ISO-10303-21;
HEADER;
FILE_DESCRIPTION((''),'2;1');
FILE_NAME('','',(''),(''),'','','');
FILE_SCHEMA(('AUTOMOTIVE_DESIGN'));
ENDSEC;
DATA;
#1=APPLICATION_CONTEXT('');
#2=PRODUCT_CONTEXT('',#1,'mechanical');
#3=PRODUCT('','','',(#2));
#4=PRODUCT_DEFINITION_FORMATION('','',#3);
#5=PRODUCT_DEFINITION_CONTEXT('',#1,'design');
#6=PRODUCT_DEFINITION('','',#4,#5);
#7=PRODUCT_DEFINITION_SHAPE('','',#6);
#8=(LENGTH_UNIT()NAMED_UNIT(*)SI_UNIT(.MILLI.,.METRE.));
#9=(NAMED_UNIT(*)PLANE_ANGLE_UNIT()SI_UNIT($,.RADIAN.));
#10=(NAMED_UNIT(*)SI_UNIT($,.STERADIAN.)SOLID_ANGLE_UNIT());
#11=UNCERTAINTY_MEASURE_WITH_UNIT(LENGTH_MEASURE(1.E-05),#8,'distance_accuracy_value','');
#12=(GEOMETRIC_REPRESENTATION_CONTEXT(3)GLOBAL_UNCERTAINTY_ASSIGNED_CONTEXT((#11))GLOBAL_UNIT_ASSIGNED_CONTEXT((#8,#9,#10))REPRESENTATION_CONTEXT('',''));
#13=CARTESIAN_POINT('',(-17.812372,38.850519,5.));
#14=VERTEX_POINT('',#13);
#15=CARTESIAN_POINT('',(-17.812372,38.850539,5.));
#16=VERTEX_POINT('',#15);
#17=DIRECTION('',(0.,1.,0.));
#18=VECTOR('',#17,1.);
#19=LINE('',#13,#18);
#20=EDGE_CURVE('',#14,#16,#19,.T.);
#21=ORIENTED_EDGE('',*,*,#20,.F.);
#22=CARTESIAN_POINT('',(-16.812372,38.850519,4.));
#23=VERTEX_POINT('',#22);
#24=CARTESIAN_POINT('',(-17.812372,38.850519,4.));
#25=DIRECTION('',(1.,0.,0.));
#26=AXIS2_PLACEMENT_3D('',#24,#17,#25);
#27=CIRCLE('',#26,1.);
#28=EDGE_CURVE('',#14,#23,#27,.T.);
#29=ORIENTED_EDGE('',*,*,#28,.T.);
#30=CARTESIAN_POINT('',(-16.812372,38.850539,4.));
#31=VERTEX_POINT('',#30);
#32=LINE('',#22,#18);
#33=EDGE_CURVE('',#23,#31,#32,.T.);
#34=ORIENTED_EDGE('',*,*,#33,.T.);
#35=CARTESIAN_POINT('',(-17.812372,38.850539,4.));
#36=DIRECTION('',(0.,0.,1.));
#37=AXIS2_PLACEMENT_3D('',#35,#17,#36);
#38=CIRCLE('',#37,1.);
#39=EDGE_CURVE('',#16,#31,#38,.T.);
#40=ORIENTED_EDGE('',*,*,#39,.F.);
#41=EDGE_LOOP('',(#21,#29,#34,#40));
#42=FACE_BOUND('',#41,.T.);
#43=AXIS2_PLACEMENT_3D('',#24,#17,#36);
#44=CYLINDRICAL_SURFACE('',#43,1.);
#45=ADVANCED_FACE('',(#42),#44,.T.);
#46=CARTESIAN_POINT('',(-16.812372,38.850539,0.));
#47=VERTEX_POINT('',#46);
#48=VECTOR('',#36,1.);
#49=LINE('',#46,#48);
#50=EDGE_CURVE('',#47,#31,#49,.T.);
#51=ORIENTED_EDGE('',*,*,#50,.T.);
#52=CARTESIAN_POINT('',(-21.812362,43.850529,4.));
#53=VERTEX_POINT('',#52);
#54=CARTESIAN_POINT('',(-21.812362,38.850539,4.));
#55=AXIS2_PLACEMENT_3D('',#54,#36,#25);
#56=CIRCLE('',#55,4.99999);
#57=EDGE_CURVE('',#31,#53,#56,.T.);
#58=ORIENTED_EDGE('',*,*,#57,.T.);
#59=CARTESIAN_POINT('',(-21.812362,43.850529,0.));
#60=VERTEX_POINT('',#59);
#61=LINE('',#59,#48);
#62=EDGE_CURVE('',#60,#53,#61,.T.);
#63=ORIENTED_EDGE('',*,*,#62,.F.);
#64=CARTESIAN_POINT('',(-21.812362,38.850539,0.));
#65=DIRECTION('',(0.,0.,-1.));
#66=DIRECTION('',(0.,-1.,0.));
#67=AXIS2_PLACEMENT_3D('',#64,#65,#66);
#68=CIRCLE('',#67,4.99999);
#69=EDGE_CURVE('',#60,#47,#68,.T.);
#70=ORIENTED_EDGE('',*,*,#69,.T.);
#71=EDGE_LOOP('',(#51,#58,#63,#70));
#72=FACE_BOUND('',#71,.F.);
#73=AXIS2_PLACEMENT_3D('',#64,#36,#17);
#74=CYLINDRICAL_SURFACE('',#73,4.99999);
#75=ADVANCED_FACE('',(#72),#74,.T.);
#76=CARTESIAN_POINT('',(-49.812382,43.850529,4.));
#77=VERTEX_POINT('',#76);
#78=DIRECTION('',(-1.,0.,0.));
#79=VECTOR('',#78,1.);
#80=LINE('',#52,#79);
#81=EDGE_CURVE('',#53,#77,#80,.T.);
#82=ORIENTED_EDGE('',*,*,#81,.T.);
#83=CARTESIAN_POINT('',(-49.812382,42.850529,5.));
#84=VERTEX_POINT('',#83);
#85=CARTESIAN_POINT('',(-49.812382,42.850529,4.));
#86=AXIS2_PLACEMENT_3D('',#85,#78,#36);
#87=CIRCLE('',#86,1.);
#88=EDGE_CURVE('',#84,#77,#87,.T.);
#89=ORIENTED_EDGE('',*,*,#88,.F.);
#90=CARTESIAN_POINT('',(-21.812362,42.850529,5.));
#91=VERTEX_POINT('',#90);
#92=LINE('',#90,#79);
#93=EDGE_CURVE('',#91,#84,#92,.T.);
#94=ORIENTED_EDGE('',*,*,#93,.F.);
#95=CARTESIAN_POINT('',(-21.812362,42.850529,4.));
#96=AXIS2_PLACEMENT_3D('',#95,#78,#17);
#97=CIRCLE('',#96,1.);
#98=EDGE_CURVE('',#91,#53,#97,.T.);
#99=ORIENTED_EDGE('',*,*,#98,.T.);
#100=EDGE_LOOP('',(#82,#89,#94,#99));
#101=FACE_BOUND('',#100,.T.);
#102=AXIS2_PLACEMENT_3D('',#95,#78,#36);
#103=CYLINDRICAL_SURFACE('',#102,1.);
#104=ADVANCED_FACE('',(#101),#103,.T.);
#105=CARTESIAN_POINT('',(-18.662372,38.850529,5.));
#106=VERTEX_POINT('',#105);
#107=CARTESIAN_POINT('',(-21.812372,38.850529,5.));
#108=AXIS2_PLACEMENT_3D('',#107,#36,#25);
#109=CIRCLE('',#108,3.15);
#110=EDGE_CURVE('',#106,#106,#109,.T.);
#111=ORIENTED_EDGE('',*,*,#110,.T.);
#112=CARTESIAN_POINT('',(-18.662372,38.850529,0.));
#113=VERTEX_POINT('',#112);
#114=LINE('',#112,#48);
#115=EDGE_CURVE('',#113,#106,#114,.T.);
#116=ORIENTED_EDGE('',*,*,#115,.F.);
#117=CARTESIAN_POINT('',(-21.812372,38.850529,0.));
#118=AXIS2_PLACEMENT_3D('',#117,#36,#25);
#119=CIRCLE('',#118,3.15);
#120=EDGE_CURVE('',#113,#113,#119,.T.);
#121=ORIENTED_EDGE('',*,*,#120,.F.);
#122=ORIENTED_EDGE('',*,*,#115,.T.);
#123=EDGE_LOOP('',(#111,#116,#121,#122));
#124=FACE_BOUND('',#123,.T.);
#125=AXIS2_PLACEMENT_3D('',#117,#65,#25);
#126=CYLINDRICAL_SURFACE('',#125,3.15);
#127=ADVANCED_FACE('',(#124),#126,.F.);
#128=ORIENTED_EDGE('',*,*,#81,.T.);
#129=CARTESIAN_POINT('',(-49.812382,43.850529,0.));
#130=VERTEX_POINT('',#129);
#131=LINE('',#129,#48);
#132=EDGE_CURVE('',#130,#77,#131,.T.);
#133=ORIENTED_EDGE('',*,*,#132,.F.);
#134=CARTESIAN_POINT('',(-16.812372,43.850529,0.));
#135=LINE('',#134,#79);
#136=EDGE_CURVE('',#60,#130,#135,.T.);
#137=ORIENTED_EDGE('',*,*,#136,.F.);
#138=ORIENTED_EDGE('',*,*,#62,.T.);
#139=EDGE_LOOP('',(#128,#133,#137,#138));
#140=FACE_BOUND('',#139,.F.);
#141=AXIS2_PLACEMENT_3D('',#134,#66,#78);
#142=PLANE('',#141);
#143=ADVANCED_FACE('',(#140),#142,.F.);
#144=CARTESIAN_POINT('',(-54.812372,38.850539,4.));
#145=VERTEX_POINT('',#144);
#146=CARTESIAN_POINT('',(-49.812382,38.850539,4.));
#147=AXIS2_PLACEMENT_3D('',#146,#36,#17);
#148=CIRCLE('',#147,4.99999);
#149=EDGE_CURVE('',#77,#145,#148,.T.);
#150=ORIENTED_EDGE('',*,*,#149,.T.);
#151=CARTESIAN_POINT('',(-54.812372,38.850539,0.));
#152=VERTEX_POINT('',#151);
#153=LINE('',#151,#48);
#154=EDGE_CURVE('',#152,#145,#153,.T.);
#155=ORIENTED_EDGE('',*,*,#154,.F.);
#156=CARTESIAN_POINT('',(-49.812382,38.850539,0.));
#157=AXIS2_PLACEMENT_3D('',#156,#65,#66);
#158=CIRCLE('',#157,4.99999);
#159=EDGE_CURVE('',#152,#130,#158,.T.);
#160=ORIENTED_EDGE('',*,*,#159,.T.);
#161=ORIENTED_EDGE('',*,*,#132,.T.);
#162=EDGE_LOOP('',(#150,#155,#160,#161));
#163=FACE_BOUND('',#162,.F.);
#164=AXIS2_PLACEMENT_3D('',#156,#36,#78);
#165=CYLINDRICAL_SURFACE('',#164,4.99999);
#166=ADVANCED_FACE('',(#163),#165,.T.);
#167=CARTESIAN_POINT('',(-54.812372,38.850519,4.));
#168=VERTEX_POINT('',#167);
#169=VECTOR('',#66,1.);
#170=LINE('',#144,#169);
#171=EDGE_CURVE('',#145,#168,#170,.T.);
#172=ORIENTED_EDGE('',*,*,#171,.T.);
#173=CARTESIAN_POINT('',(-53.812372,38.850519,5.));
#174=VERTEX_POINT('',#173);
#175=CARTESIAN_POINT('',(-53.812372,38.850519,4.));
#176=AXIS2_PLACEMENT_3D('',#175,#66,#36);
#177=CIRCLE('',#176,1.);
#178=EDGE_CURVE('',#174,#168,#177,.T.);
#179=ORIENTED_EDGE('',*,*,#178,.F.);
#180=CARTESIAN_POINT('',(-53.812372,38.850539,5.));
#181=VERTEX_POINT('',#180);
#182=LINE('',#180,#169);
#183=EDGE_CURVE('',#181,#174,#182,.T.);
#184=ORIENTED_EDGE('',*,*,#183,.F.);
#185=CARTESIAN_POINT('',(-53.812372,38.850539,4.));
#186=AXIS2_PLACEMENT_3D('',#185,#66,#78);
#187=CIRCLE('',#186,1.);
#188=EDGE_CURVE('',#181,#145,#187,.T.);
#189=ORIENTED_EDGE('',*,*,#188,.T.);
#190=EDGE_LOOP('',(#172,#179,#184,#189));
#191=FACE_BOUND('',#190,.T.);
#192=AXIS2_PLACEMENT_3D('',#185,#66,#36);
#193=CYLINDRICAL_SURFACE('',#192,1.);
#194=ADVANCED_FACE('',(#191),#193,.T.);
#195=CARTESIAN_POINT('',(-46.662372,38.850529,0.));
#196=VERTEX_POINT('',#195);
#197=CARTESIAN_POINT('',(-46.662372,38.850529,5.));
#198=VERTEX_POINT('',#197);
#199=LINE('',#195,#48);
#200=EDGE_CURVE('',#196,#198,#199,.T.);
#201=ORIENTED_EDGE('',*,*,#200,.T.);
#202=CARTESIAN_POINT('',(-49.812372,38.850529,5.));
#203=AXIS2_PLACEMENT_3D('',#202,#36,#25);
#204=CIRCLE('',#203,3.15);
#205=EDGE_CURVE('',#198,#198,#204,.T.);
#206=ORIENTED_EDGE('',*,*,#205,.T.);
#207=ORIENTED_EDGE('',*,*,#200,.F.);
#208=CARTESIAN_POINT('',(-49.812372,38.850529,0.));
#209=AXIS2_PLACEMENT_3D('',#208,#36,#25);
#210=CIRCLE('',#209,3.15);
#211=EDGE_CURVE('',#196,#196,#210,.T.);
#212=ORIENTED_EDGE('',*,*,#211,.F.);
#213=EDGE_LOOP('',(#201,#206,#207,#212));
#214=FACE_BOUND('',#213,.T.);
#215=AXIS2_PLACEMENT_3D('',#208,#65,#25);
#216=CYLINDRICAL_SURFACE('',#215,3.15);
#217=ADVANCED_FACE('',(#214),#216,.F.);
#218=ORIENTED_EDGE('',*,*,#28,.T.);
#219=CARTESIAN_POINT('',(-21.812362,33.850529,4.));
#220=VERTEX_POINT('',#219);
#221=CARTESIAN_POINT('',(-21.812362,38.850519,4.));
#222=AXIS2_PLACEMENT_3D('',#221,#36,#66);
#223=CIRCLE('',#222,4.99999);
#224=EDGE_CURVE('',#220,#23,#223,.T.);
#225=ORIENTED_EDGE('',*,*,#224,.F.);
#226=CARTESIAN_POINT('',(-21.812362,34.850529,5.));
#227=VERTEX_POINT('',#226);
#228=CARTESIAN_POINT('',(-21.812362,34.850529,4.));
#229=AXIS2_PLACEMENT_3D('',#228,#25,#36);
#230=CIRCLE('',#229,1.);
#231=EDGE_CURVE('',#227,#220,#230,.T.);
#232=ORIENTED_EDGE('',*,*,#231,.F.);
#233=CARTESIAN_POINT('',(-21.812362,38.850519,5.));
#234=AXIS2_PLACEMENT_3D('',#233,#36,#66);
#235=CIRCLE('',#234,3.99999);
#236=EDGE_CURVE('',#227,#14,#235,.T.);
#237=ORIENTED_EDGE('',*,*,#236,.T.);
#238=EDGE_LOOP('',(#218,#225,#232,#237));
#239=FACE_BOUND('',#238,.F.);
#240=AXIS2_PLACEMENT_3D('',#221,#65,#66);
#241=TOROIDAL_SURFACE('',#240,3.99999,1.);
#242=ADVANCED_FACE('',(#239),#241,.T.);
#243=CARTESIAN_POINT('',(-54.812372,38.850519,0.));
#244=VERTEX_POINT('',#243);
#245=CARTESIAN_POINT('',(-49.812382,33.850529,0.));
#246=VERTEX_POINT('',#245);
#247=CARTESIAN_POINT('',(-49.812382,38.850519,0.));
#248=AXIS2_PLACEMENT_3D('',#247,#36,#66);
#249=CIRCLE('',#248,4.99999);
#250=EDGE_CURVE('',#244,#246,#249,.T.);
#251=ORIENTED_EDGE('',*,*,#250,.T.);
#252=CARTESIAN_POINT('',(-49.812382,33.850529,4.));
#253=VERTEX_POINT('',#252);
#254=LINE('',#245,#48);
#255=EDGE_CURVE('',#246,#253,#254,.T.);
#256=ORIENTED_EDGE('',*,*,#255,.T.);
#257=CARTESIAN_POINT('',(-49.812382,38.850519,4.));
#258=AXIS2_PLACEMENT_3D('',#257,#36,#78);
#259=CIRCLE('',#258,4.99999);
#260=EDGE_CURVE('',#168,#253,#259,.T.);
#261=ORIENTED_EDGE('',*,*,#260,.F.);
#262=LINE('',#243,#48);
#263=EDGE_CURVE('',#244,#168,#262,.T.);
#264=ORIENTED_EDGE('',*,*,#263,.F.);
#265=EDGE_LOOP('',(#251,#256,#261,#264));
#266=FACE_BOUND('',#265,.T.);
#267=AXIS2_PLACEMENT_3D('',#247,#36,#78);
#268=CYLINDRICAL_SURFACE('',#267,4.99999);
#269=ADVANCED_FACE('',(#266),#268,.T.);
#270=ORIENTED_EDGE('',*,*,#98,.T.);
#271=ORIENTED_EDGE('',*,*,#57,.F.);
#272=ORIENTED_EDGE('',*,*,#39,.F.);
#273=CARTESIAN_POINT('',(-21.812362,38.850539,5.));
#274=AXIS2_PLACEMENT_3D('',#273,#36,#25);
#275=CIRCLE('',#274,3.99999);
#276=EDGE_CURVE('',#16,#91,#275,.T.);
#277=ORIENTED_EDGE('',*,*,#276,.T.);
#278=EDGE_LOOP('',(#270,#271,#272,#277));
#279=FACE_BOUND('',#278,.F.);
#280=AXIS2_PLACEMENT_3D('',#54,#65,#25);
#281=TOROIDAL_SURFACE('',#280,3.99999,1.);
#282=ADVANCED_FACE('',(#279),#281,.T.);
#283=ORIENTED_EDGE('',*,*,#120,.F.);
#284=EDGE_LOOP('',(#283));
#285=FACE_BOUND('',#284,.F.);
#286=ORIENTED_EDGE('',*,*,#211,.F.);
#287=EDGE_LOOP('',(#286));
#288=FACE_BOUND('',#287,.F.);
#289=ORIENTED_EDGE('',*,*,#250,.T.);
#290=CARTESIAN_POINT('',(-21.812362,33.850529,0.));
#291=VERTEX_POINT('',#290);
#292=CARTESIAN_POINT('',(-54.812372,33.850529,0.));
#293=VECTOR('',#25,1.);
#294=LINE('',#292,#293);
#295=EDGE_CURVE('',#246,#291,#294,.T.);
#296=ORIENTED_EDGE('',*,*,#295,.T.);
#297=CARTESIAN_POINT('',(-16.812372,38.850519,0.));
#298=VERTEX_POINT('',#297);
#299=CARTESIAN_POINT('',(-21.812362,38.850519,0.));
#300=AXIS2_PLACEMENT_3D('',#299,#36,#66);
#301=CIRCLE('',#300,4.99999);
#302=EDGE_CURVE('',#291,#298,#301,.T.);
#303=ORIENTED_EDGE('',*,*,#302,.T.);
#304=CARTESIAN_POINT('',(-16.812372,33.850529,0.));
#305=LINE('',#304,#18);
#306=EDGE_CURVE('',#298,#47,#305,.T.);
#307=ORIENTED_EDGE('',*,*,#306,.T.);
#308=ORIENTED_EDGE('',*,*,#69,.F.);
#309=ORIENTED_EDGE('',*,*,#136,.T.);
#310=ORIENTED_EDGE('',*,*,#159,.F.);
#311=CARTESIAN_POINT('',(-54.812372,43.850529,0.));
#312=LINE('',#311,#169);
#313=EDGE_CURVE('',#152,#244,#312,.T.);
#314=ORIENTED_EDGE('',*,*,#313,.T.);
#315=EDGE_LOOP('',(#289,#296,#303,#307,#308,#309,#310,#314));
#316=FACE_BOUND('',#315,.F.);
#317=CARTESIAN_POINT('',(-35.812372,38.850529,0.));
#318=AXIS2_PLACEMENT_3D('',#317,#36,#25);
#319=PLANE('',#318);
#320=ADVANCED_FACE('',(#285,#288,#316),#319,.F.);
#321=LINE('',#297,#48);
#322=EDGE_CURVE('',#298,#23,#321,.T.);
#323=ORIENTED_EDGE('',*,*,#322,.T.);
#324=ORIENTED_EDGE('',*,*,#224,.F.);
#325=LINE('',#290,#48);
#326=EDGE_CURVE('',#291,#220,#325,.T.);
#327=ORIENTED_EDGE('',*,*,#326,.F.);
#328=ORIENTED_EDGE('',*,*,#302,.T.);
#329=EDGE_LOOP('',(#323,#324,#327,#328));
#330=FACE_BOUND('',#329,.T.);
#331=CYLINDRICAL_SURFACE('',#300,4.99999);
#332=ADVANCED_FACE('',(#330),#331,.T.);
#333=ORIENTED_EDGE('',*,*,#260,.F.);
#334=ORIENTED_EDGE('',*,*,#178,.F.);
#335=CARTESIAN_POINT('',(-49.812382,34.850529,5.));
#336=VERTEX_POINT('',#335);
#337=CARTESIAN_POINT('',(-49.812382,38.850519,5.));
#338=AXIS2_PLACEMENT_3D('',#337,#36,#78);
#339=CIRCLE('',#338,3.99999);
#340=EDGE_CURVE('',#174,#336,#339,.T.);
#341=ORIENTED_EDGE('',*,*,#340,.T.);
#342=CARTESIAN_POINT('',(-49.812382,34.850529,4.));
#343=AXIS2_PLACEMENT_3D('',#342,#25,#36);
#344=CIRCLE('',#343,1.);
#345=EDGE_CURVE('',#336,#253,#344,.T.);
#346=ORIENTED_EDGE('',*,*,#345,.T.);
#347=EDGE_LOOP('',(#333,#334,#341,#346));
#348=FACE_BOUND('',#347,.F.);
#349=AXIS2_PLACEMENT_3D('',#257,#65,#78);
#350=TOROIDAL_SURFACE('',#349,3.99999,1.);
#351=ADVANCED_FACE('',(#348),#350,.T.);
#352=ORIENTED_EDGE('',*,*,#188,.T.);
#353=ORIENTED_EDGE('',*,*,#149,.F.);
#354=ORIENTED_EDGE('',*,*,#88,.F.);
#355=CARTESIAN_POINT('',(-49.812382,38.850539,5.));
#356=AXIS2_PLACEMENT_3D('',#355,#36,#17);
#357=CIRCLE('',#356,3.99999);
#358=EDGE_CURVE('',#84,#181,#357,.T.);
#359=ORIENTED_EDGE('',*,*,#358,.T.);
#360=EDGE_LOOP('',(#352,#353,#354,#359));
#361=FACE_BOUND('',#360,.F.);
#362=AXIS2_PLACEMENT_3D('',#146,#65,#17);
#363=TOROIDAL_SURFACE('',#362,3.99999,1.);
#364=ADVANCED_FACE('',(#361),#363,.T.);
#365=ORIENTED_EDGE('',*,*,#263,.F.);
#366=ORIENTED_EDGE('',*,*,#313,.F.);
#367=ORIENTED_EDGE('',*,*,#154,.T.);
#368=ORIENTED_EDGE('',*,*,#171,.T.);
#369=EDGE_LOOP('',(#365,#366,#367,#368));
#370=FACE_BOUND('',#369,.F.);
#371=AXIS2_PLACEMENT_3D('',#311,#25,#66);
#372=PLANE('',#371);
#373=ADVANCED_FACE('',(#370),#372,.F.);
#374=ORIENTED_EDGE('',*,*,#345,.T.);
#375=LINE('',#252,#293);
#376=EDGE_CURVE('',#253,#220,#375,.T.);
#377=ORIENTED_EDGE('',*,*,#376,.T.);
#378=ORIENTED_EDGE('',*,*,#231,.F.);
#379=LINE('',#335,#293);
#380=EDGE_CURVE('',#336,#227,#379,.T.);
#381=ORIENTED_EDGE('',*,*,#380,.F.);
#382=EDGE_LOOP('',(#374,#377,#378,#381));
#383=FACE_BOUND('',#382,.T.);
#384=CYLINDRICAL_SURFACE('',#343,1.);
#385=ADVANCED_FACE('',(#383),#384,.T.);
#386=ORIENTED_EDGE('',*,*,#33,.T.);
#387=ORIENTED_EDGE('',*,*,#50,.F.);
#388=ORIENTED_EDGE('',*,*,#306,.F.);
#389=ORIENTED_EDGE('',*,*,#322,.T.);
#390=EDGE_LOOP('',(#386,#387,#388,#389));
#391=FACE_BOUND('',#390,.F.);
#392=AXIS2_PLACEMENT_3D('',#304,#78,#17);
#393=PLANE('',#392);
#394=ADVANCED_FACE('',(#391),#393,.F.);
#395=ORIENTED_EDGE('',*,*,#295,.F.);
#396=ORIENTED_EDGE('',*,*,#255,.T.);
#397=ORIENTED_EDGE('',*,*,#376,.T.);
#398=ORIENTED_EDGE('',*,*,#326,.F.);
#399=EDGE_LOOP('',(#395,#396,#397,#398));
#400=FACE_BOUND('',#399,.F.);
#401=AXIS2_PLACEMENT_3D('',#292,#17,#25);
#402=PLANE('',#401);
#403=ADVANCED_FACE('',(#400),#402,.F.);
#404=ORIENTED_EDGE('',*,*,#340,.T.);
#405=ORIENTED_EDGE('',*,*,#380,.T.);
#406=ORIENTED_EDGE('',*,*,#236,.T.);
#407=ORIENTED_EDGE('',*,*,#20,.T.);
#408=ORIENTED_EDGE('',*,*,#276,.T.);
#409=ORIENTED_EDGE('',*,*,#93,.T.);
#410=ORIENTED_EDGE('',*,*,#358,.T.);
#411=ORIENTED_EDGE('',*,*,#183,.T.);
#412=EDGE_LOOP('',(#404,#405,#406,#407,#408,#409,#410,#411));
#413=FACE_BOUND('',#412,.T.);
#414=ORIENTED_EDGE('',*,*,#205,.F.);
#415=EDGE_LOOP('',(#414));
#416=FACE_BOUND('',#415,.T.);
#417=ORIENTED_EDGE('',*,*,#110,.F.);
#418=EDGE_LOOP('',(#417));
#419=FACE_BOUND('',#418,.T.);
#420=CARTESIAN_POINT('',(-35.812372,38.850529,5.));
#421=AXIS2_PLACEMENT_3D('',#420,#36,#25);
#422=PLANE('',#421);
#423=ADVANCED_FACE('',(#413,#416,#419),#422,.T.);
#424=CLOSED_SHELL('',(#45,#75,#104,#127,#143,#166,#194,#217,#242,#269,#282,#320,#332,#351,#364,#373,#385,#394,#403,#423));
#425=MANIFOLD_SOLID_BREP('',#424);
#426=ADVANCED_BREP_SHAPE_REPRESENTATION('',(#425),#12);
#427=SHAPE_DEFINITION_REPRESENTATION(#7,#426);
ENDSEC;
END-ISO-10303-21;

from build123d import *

# Parameters (mm, degrees)
F0_R     = 3.15
F1_DEPTH = 5
F2_R     = 4.99999
F3_R     = 1


# Not quite as in the source:
# - a fillet or chamfer is up to 0.001 mm smaller than in the source, because OpenCascade refuses the exact size


with BuildPart() as f1:
    # F0 (on Top) → F1 (new body)
    with BuildSketch(Plane.XY):
        Polygon((-49.8123717308, 43.8505291194), (-54.8123717308, 43.8505291194), (-54.8123717308, 33.8505291194), (-16.8123717308, 33.8505291194), (-16.8123717308, 43.8505291194), align=None)
        with Locations((-49.8123717308, 38.8505291194)):
            Circle(F0_R, mode=Mode.SUBTRACT)
        with Locations((-21.8123717308, 38.8505291194)):
            Circle(F0_R, mode=Mode.SUBTRACT)
    extrude(amount=F1_DEPTH)

    # F2 (radius 5 in the source; OpenCascade refuses exactly that, so slightly less here)
    f2_edges = [f1.edges().sort_by_distance(p)[0] for p in [
        (-54.812372, 33.850529, 2.5),
        (-54.812372, 43.850529, 2.5),
        (-16.812372, 43.850529, 2.5),
        (-16.812372, 33.850529, 2.5),
    ]]
    fillet(f2_edges, radius=F2_R)

    # F3
    f3_edges = [f1.edges().sort_by_distance(p)[0] for p in [
        (-35.812372, 33.850529, 5),
        (-35.812372, 43.850529, 5),
    ]]
    fillet(f3_edges, radius=F3_R)


solid = f1.part
